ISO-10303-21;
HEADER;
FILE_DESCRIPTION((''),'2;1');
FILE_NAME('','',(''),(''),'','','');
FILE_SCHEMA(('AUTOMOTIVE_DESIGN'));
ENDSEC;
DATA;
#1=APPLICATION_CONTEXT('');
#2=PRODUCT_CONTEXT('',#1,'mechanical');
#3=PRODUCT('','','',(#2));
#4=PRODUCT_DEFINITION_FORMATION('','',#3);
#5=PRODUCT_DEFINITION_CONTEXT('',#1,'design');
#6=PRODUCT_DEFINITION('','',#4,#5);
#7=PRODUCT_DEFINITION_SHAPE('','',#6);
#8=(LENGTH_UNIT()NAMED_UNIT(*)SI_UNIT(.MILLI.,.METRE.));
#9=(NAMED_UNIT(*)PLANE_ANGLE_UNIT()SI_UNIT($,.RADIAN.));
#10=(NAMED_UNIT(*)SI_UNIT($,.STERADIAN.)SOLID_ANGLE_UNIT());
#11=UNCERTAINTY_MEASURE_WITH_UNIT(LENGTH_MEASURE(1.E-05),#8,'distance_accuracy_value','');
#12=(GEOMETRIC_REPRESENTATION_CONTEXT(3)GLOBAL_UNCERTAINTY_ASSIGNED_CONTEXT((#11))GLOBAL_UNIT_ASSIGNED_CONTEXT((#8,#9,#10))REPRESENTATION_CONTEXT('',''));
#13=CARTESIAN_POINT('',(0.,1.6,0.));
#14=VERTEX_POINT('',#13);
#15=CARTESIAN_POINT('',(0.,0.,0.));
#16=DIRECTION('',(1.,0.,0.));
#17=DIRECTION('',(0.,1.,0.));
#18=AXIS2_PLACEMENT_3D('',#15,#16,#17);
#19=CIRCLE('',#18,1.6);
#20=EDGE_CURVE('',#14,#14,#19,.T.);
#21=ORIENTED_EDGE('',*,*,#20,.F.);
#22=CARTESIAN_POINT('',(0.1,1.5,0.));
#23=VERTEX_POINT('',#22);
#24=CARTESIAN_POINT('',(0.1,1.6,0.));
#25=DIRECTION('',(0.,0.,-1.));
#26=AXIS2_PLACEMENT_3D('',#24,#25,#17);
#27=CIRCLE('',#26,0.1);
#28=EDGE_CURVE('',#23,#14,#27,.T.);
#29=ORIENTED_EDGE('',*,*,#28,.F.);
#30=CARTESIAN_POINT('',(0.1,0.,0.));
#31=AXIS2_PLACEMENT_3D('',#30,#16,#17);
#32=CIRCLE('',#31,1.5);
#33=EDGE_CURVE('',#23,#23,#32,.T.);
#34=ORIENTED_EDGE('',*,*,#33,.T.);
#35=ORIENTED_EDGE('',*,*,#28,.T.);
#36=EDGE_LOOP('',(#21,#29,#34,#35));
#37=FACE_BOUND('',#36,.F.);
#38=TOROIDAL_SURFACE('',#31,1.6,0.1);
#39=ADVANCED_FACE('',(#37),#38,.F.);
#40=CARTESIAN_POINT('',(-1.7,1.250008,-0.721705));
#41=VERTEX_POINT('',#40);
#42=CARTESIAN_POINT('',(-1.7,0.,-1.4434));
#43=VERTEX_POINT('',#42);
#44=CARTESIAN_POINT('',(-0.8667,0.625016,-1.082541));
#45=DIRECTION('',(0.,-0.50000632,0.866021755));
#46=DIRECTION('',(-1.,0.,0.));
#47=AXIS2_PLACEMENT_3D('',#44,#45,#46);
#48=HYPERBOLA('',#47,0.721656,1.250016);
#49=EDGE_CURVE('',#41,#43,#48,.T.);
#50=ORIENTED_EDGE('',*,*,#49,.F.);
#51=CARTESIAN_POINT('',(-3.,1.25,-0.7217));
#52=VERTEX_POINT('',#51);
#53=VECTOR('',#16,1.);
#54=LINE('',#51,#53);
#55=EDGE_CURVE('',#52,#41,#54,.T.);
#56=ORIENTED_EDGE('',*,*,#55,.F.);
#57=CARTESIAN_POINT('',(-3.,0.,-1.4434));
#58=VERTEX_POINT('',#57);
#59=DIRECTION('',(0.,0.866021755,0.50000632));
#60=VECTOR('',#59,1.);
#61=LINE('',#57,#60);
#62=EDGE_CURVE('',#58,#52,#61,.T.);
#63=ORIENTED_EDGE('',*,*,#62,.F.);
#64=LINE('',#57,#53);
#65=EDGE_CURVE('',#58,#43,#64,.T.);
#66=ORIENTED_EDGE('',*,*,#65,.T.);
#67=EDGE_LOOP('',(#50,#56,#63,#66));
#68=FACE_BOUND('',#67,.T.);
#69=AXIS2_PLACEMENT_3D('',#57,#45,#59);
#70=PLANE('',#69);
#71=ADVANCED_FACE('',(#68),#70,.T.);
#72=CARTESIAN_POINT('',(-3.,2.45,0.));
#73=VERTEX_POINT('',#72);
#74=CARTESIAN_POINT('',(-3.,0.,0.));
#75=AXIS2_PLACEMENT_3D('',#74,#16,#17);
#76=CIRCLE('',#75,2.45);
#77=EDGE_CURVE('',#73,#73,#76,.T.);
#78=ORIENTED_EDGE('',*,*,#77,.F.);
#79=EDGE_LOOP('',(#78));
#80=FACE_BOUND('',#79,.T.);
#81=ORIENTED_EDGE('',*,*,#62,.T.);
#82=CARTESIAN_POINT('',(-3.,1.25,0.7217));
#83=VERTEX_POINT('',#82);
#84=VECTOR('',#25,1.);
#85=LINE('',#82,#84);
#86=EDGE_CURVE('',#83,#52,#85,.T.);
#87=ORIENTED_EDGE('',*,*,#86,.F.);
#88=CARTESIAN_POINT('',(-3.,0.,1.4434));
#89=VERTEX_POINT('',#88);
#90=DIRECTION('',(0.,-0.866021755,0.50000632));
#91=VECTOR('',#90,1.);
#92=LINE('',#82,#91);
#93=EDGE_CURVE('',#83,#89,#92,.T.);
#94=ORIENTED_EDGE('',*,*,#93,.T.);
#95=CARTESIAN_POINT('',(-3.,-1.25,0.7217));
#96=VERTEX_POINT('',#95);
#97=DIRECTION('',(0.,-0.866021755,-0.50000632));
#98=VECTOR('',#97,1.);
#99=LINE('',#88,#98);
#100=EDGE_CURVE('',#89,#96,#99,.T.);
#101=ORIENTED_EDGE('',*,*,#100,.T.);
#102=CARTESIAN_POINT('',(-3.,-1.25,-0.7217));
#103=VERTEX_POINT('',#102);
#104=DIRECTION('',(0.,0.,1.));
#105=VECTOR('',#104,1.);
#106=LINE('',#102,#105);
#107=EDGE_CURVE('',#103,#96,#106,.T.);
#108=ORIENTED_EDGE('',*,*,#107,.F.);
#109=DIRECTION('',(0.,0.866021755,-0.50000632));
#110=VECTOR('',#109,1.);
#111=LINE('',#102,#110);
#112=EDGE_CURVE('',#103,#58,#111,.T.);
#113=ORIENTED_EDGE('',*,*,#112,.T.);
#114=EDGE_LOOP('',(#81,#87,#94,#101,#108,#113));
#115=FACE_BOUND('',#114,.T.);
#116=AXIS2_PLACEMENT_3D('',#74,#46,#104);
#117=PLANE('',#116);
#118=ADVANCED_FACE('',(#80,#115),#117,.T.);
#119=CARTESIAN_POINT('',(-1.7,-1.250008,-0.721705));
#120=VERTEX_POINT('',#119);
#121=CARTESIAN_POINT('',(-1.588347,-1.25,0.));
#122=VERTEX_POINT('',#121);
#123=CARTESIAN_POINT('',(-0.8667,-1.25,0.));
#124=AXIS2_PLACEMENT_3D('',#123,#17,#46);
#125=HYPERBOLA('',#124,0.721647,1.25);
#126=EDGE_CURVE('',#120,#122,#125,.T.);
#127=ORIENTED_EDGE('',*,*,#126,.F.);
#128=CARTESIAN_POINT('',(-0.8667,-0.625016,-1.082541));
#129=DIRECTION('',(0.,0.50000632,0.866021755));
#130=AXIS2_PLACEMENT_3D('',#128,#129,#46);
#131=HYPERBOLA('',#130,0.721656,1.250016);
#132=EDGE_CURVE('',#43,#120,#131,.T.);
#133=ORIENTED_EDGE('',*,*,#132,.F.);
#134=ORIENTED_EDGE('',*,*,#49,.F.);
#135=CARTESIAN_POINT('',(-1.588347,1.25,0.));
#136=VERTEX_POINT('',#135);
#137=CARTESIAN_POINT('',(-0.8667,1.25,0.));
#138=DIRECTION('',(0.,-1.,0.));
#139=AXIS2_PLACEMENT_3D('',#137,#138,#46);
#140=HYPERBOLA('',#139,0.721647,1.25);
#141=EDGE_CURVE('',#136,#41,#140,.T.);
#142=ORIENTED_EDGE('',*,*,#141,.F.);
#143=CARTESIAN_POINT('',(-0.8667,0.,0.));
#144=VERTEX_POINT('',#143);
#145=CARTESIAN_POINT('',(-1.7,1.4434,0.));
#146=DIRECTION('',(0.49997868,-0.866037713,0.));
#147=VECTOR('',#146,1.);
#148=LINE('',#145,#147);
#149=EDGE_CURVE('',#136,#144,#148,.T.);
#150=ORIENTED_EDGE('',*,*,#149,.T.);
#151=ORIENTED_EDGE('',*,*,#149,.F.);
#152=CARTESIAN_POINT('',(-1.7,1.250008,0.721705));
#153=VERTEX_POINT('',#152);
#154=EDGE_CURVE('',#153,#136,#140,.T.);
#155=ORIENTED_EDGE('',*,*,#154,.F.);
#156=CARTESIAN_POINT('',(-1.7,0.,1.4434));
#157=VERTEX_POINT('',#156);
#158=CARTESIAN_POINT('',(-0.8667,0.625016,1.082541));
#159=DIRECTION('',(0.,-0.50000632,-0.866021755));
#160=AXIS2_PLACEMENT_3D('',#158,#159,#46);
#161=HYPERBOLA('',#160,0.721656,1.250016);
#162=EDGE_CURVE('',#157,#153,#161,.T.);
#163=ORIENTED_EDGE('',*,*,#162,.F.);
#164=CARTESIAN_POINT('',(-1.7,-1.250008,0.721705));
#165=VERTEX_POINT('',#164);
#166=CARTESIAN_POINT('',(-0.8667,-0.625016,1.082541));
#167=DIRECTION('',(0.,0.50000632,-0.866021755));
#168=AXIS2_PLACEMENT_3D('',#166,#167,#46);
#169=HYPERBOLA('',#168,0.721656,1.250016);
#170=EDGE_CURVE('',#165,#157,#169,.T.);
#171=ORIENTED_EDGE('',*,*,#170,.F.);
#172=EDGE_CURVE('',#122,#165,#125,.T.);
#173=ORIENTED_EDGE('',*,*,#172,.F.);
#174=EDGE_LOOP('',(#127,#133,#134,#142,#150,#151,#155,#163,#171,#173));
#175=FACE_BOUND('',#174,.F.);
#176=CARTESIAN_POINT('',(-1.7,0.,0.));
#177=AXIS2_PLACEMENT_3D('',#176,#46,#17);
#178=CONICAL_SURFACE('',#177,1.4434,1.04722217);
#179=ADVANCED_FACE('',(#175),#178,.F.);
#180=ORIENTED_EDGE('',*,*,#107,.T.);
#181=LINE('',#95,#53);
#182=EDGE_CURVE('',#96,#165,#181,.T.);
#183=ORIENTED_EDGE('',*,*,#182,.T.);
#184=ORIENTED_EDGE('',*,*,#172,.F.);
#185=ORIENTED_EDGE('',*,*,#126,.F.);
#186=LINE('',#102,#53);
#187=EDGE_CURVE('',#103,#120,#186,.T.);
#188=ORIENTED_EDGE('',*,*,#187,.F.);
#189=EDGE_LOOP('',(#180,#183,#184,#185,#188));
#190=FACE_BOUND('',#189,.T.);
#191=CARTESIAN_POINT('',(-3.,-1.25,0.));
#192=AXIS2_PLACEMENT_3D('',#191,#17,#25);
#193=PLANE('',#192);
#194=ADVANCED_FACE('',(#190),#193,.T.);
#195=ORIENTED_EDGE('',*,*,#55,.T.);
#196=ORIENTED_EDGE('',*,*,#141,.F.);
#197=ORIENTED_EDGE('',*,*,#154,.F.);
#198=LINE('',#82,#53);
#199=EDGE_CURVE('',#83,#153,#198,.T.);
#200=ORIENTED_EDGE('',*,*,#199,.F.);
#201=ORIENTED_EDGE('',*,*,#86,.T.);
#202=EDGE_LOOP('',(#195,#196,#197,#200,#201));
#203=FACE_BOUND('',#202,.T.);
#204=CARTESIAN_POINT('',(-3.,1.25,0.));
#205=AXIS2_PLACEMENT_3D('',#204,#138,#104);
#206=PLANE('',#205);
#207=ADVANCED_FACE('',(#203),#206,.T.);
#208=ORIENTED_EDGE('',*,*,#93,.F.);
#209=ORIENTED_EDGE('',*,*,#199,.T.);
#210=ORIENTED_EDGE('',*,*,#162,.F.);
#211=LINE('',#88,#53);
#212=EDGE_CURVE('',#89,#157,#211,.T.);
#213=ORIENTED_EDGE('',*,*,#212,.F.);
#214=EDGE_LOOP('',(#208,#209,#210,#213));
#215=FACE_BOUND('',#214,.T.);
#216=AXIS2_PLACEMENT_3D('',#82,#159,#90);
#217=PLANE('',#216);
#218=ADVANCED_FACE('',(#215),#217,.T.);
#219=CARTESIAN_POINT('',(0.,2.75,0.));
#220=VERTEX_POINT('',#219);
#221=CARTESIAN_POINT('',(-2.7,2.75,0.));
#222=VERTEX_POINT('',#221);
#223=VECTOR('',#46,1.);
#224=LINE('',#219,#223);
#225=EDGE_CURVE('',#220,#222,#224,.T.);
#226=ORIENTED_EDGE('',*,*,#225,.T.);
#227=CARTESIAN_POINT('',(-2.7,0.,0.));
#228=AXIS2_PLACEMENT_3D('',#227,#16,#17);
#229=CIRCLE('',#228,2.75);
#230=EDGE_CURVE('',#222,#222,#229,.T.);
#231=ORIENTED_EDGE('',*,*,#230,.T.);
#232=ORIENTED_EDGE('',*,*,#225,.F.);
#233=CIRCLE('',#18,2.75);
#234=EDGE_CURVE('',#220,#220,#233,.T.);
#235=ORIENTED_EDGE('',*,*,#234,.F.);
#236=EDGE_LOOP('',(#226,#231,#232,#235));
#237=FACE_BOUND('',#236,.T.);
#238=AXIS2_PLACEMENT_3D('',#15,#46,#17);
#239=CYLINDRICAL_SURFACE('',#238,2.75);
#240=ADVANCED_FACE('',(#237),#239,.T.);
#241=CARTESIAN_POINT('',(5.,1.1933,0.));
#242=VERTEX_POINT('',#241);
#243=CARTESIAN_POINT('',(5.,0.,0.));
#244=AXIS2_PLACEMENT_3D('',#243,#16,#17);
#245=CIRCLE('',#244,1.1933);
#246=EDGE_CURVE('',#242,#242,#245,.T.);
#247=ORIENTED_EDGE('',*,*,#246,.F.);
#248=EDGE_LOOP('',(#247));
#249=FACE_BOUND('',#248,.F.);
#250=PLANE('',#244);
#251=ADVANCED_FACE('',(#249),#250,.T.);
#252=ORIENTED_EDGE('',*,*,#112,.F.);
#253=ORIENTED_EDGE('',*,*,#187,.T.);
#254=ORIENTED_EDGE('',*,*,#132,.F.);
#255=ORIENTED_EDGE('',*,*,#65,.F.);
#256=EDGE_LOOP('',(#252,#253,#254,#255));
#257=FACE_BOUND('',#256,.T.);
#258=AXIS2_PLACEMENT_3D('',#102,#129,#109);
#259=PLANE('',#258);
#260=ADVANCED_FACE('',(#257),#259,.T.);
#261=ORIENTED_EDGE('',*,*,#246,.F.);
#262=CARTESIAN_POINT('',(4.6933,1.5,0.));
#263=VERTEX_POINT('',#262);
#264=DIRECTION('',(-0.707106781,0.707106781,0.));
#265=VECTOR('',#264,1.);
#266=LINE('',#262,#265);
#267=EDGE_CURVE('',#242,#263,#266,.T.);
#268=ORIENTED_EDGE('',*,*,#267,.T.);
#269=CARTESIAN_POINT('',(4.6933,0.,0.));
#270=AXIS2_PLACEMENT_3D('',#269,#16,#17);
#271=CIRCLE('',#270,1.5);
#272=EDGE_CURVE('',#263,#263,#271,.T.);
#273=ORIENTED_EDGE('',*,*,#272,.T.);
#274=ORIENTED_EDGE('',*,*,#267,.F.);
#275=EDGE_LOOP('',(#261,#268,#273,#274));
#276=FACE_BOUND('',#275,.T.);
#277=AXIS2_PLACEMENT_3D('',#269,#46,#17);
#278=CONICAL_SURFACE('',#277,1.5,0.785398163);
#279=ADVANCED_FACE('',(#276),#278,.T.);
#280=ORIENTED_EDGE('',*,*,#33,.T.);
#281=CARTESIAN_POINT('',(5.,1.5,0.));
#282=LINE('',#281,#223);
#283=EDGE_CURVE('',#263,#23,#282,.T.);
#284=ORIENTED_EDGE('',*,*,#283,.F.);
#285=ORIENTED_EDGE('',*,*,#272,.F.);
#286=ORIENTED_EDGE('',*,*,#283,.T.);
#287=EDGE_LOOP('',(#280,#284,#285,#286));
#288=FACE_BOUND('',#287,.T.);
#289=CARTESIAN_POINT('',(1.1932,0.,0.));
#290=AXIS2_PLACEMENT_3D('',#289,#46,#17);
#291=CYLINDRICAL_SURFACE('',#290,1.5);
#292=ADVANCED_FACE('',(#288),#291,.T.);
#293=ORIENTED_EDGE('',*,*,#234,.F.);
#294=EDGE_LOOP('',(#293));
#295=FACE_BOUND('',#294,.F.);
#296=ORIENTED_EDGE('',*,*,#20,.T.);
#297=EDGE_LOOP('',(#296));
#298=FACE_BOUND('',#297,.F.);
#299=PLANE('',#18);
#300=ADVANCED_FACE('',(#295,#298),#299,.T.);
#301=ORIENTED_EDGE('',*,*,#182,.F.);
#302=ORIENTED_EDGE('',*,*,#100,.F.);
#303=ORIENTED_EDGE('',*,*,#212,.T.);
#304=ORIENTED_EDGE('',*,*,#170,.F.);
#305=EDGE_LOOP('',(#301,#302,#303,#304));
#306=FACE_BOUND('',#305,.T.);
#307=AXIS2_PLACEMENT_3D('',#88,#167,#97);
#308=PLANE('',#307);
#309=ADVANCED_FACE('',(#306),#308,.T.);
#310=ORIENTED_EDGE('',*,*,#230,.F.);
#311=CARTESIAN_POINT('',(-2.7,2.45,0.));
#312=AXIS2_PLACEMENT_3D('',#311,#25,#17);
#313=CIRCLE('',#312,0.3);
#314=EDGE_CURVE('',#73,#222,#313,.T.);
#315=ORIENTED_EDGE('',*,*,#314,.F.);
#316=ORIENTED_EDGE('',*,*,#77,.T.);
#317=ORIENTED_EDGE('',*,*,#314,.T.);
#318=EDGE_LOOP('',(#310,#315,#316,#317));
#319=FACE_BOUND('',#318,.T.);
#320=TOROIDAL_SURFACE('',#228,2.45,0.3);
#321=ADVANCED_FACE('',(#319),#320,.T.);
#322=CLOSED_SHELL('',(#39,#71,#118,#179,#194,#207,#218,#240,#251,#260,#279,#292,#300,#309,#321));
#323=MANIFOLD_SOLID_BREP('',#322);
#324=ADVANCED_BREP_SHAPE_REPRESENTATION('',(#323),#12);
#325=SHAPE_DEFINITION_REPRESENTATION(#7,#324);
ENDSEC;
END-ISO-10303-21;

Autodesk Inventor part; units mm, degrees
ref_plane "YZ Plane" through (0, 0, 0) normal (1, 0, 0) x (0, 1, 0)
ref_plane "XZ Plane" through (0, 0, 0) normal (0, 1, 0) x (-1, 0, 0)
sketch "Skizze1" plane through (0, 0, 0) normal (0, 0, 1) x (1, 0, 0)
  line L0 (-0.8667, 0) -> (5, 0)
  line L1 (5, 0) -> (5, 1.5)
  line L2 (5, 1.5) -> (1.5, 1.5)
  line L3 (1.5, 1.5) -> (1.1932, 1.5)
  line L4 (1.1932, 1.5) -> (0, 1.5)
  line L5 (0, 1.5) -> (0, 2.75)
  line L6 (0, 2.75) -> (-3, 2.75)
  line L7 (-3, 2.75) -> (-3, 1.4434)
  line L8 (-3, 1.4434) -> (-1.7, 1.4434)
  line L9 (-1.7, 1.4434) -> (-0.8667, 0)
  line L10 (-4.6, 0) -> (6.6, 0) projected
  line L11 (0, -0.55) -> (0, 3.3) projected
  line L12 (1.5, 1.5) -> (0, 1.5) construction
  dimension "d1" = 3.5
  dimension "d2" = 0.3068
  dimension "d3" = 3
  dimension "d4" = 1.3
  dimension "d5" = 60
  dimension "d6" = 3
  dimension "d7" = 3
  dimension "d8" = 2.8868
  dimension "d9" = 5.5
  dimension "d26" = 5
revolve "Körper" add sketch "Skizze1" angle 360 about axis through (-0.8667, 0, 0) along (1, 0, 0)
sketch "Skizze2" plane through (-3, 0, 0) normal (-1, 0, 0) x (0, 0, 1)
  circle A0 centre (0, 0) radius 1.4434 projected
  line L0 (0, -3.85) -> (0, 3.85) projected
  line L1 (-3.85, 0) -> (3.85, 0) projected
  line L2 (1.4434, 0) -> (0.7217, -1.25)
  line L3 (0.7217, -1.25) -> (-0.7217, -1.25)
  line L4 (-0.7217, -1.25) -> (-1.4434, 0)
  line L5 (-1.4434, 0) -> (-0.7217, 1.25)
  line L6 (-0.7217, 1.25) -> (0.7217, 1.25)
  line L7 (0.7217, 1.25) -> (1.4434, 0)
extrude "Loch" add sketch "Skizze2" against normal up to next contours L7 A0 | A0 L2 | L6 L0 A0 | A0 L0 L3 | L0 L6 A0 | A0 L3 L0 | L4 A0 | A0 L5
fillet "Rundung1" radius 0.3 1 edges at (-3, -2.75, 0)
thread "Gewinde" size "M3x0.5" class "6g" standard "ISO Metric profile" length 3.5
chamfer "Fase1" distance 0.3067 distance2 0.3067 1 edges at (5, -1.5, 0) measured on face at (5, -0.2617, -0.7882)
ref_plane "Work Plane1" through (29, 0, 0) normal (0, -1, 0) x (1, 0, 0)
fillet "Fillet2" radius 0.1 1 edges at (0, -1.5, 0)
equation "\"d30\" = R"
equation "\"d15\" = -0.5 * SPD + 0.5 * GD"
equation "\"d16\" = GUL"
equation "\"d17\" = RR"
equation "\"d13\" = GEL"
equation "\"d1\" = GEL"
equation "\"d3\" = KOH"
equation "\"d4\" = INTI"
equation "\"d6\" = GD"
equation "\"d7\" = BDM"
equation "\"d8\" = 1.1547 * SW"
equation "\"d9\" = KOD"
equation "\"d26\" = NLG"
equation "\"GD\" = 3"
equation "\"NLG\" = 5"
equation "\"GEL\" = 3.5"
equation "\"KOD\" = 5.5"
equation "\"KOH\" = 3"
equation "\"INTI\" = 1.3"
equation "\"GAL\" = 0.61345 * PTC"
equation "\"GUL\" = 0.61345 * PTC"
equation "\"BDM\" = NND"
equation "\"SW\" = 2.5"
equation "\"RR\" = 0.3"
equation "\"SPD\" = NND - 1.2269 * PTC"
equation "\"R\" = 0.1"
equation "\"TOA\" = 30deg"
equation "\"GD1\" = THREADDIA - 1.2269 * PTC"
equation "\"THREADDIA\" = 3"
equation "\"FAWI\" = 45deg"
equation "\"PTC\" = 0.5"
equation "\"NND\" = 3"
equation "\"E0\" = 1.155 * SW"
properties part number "ISO 4762  - M3 x 5" material "Edelstahl, 440C"
